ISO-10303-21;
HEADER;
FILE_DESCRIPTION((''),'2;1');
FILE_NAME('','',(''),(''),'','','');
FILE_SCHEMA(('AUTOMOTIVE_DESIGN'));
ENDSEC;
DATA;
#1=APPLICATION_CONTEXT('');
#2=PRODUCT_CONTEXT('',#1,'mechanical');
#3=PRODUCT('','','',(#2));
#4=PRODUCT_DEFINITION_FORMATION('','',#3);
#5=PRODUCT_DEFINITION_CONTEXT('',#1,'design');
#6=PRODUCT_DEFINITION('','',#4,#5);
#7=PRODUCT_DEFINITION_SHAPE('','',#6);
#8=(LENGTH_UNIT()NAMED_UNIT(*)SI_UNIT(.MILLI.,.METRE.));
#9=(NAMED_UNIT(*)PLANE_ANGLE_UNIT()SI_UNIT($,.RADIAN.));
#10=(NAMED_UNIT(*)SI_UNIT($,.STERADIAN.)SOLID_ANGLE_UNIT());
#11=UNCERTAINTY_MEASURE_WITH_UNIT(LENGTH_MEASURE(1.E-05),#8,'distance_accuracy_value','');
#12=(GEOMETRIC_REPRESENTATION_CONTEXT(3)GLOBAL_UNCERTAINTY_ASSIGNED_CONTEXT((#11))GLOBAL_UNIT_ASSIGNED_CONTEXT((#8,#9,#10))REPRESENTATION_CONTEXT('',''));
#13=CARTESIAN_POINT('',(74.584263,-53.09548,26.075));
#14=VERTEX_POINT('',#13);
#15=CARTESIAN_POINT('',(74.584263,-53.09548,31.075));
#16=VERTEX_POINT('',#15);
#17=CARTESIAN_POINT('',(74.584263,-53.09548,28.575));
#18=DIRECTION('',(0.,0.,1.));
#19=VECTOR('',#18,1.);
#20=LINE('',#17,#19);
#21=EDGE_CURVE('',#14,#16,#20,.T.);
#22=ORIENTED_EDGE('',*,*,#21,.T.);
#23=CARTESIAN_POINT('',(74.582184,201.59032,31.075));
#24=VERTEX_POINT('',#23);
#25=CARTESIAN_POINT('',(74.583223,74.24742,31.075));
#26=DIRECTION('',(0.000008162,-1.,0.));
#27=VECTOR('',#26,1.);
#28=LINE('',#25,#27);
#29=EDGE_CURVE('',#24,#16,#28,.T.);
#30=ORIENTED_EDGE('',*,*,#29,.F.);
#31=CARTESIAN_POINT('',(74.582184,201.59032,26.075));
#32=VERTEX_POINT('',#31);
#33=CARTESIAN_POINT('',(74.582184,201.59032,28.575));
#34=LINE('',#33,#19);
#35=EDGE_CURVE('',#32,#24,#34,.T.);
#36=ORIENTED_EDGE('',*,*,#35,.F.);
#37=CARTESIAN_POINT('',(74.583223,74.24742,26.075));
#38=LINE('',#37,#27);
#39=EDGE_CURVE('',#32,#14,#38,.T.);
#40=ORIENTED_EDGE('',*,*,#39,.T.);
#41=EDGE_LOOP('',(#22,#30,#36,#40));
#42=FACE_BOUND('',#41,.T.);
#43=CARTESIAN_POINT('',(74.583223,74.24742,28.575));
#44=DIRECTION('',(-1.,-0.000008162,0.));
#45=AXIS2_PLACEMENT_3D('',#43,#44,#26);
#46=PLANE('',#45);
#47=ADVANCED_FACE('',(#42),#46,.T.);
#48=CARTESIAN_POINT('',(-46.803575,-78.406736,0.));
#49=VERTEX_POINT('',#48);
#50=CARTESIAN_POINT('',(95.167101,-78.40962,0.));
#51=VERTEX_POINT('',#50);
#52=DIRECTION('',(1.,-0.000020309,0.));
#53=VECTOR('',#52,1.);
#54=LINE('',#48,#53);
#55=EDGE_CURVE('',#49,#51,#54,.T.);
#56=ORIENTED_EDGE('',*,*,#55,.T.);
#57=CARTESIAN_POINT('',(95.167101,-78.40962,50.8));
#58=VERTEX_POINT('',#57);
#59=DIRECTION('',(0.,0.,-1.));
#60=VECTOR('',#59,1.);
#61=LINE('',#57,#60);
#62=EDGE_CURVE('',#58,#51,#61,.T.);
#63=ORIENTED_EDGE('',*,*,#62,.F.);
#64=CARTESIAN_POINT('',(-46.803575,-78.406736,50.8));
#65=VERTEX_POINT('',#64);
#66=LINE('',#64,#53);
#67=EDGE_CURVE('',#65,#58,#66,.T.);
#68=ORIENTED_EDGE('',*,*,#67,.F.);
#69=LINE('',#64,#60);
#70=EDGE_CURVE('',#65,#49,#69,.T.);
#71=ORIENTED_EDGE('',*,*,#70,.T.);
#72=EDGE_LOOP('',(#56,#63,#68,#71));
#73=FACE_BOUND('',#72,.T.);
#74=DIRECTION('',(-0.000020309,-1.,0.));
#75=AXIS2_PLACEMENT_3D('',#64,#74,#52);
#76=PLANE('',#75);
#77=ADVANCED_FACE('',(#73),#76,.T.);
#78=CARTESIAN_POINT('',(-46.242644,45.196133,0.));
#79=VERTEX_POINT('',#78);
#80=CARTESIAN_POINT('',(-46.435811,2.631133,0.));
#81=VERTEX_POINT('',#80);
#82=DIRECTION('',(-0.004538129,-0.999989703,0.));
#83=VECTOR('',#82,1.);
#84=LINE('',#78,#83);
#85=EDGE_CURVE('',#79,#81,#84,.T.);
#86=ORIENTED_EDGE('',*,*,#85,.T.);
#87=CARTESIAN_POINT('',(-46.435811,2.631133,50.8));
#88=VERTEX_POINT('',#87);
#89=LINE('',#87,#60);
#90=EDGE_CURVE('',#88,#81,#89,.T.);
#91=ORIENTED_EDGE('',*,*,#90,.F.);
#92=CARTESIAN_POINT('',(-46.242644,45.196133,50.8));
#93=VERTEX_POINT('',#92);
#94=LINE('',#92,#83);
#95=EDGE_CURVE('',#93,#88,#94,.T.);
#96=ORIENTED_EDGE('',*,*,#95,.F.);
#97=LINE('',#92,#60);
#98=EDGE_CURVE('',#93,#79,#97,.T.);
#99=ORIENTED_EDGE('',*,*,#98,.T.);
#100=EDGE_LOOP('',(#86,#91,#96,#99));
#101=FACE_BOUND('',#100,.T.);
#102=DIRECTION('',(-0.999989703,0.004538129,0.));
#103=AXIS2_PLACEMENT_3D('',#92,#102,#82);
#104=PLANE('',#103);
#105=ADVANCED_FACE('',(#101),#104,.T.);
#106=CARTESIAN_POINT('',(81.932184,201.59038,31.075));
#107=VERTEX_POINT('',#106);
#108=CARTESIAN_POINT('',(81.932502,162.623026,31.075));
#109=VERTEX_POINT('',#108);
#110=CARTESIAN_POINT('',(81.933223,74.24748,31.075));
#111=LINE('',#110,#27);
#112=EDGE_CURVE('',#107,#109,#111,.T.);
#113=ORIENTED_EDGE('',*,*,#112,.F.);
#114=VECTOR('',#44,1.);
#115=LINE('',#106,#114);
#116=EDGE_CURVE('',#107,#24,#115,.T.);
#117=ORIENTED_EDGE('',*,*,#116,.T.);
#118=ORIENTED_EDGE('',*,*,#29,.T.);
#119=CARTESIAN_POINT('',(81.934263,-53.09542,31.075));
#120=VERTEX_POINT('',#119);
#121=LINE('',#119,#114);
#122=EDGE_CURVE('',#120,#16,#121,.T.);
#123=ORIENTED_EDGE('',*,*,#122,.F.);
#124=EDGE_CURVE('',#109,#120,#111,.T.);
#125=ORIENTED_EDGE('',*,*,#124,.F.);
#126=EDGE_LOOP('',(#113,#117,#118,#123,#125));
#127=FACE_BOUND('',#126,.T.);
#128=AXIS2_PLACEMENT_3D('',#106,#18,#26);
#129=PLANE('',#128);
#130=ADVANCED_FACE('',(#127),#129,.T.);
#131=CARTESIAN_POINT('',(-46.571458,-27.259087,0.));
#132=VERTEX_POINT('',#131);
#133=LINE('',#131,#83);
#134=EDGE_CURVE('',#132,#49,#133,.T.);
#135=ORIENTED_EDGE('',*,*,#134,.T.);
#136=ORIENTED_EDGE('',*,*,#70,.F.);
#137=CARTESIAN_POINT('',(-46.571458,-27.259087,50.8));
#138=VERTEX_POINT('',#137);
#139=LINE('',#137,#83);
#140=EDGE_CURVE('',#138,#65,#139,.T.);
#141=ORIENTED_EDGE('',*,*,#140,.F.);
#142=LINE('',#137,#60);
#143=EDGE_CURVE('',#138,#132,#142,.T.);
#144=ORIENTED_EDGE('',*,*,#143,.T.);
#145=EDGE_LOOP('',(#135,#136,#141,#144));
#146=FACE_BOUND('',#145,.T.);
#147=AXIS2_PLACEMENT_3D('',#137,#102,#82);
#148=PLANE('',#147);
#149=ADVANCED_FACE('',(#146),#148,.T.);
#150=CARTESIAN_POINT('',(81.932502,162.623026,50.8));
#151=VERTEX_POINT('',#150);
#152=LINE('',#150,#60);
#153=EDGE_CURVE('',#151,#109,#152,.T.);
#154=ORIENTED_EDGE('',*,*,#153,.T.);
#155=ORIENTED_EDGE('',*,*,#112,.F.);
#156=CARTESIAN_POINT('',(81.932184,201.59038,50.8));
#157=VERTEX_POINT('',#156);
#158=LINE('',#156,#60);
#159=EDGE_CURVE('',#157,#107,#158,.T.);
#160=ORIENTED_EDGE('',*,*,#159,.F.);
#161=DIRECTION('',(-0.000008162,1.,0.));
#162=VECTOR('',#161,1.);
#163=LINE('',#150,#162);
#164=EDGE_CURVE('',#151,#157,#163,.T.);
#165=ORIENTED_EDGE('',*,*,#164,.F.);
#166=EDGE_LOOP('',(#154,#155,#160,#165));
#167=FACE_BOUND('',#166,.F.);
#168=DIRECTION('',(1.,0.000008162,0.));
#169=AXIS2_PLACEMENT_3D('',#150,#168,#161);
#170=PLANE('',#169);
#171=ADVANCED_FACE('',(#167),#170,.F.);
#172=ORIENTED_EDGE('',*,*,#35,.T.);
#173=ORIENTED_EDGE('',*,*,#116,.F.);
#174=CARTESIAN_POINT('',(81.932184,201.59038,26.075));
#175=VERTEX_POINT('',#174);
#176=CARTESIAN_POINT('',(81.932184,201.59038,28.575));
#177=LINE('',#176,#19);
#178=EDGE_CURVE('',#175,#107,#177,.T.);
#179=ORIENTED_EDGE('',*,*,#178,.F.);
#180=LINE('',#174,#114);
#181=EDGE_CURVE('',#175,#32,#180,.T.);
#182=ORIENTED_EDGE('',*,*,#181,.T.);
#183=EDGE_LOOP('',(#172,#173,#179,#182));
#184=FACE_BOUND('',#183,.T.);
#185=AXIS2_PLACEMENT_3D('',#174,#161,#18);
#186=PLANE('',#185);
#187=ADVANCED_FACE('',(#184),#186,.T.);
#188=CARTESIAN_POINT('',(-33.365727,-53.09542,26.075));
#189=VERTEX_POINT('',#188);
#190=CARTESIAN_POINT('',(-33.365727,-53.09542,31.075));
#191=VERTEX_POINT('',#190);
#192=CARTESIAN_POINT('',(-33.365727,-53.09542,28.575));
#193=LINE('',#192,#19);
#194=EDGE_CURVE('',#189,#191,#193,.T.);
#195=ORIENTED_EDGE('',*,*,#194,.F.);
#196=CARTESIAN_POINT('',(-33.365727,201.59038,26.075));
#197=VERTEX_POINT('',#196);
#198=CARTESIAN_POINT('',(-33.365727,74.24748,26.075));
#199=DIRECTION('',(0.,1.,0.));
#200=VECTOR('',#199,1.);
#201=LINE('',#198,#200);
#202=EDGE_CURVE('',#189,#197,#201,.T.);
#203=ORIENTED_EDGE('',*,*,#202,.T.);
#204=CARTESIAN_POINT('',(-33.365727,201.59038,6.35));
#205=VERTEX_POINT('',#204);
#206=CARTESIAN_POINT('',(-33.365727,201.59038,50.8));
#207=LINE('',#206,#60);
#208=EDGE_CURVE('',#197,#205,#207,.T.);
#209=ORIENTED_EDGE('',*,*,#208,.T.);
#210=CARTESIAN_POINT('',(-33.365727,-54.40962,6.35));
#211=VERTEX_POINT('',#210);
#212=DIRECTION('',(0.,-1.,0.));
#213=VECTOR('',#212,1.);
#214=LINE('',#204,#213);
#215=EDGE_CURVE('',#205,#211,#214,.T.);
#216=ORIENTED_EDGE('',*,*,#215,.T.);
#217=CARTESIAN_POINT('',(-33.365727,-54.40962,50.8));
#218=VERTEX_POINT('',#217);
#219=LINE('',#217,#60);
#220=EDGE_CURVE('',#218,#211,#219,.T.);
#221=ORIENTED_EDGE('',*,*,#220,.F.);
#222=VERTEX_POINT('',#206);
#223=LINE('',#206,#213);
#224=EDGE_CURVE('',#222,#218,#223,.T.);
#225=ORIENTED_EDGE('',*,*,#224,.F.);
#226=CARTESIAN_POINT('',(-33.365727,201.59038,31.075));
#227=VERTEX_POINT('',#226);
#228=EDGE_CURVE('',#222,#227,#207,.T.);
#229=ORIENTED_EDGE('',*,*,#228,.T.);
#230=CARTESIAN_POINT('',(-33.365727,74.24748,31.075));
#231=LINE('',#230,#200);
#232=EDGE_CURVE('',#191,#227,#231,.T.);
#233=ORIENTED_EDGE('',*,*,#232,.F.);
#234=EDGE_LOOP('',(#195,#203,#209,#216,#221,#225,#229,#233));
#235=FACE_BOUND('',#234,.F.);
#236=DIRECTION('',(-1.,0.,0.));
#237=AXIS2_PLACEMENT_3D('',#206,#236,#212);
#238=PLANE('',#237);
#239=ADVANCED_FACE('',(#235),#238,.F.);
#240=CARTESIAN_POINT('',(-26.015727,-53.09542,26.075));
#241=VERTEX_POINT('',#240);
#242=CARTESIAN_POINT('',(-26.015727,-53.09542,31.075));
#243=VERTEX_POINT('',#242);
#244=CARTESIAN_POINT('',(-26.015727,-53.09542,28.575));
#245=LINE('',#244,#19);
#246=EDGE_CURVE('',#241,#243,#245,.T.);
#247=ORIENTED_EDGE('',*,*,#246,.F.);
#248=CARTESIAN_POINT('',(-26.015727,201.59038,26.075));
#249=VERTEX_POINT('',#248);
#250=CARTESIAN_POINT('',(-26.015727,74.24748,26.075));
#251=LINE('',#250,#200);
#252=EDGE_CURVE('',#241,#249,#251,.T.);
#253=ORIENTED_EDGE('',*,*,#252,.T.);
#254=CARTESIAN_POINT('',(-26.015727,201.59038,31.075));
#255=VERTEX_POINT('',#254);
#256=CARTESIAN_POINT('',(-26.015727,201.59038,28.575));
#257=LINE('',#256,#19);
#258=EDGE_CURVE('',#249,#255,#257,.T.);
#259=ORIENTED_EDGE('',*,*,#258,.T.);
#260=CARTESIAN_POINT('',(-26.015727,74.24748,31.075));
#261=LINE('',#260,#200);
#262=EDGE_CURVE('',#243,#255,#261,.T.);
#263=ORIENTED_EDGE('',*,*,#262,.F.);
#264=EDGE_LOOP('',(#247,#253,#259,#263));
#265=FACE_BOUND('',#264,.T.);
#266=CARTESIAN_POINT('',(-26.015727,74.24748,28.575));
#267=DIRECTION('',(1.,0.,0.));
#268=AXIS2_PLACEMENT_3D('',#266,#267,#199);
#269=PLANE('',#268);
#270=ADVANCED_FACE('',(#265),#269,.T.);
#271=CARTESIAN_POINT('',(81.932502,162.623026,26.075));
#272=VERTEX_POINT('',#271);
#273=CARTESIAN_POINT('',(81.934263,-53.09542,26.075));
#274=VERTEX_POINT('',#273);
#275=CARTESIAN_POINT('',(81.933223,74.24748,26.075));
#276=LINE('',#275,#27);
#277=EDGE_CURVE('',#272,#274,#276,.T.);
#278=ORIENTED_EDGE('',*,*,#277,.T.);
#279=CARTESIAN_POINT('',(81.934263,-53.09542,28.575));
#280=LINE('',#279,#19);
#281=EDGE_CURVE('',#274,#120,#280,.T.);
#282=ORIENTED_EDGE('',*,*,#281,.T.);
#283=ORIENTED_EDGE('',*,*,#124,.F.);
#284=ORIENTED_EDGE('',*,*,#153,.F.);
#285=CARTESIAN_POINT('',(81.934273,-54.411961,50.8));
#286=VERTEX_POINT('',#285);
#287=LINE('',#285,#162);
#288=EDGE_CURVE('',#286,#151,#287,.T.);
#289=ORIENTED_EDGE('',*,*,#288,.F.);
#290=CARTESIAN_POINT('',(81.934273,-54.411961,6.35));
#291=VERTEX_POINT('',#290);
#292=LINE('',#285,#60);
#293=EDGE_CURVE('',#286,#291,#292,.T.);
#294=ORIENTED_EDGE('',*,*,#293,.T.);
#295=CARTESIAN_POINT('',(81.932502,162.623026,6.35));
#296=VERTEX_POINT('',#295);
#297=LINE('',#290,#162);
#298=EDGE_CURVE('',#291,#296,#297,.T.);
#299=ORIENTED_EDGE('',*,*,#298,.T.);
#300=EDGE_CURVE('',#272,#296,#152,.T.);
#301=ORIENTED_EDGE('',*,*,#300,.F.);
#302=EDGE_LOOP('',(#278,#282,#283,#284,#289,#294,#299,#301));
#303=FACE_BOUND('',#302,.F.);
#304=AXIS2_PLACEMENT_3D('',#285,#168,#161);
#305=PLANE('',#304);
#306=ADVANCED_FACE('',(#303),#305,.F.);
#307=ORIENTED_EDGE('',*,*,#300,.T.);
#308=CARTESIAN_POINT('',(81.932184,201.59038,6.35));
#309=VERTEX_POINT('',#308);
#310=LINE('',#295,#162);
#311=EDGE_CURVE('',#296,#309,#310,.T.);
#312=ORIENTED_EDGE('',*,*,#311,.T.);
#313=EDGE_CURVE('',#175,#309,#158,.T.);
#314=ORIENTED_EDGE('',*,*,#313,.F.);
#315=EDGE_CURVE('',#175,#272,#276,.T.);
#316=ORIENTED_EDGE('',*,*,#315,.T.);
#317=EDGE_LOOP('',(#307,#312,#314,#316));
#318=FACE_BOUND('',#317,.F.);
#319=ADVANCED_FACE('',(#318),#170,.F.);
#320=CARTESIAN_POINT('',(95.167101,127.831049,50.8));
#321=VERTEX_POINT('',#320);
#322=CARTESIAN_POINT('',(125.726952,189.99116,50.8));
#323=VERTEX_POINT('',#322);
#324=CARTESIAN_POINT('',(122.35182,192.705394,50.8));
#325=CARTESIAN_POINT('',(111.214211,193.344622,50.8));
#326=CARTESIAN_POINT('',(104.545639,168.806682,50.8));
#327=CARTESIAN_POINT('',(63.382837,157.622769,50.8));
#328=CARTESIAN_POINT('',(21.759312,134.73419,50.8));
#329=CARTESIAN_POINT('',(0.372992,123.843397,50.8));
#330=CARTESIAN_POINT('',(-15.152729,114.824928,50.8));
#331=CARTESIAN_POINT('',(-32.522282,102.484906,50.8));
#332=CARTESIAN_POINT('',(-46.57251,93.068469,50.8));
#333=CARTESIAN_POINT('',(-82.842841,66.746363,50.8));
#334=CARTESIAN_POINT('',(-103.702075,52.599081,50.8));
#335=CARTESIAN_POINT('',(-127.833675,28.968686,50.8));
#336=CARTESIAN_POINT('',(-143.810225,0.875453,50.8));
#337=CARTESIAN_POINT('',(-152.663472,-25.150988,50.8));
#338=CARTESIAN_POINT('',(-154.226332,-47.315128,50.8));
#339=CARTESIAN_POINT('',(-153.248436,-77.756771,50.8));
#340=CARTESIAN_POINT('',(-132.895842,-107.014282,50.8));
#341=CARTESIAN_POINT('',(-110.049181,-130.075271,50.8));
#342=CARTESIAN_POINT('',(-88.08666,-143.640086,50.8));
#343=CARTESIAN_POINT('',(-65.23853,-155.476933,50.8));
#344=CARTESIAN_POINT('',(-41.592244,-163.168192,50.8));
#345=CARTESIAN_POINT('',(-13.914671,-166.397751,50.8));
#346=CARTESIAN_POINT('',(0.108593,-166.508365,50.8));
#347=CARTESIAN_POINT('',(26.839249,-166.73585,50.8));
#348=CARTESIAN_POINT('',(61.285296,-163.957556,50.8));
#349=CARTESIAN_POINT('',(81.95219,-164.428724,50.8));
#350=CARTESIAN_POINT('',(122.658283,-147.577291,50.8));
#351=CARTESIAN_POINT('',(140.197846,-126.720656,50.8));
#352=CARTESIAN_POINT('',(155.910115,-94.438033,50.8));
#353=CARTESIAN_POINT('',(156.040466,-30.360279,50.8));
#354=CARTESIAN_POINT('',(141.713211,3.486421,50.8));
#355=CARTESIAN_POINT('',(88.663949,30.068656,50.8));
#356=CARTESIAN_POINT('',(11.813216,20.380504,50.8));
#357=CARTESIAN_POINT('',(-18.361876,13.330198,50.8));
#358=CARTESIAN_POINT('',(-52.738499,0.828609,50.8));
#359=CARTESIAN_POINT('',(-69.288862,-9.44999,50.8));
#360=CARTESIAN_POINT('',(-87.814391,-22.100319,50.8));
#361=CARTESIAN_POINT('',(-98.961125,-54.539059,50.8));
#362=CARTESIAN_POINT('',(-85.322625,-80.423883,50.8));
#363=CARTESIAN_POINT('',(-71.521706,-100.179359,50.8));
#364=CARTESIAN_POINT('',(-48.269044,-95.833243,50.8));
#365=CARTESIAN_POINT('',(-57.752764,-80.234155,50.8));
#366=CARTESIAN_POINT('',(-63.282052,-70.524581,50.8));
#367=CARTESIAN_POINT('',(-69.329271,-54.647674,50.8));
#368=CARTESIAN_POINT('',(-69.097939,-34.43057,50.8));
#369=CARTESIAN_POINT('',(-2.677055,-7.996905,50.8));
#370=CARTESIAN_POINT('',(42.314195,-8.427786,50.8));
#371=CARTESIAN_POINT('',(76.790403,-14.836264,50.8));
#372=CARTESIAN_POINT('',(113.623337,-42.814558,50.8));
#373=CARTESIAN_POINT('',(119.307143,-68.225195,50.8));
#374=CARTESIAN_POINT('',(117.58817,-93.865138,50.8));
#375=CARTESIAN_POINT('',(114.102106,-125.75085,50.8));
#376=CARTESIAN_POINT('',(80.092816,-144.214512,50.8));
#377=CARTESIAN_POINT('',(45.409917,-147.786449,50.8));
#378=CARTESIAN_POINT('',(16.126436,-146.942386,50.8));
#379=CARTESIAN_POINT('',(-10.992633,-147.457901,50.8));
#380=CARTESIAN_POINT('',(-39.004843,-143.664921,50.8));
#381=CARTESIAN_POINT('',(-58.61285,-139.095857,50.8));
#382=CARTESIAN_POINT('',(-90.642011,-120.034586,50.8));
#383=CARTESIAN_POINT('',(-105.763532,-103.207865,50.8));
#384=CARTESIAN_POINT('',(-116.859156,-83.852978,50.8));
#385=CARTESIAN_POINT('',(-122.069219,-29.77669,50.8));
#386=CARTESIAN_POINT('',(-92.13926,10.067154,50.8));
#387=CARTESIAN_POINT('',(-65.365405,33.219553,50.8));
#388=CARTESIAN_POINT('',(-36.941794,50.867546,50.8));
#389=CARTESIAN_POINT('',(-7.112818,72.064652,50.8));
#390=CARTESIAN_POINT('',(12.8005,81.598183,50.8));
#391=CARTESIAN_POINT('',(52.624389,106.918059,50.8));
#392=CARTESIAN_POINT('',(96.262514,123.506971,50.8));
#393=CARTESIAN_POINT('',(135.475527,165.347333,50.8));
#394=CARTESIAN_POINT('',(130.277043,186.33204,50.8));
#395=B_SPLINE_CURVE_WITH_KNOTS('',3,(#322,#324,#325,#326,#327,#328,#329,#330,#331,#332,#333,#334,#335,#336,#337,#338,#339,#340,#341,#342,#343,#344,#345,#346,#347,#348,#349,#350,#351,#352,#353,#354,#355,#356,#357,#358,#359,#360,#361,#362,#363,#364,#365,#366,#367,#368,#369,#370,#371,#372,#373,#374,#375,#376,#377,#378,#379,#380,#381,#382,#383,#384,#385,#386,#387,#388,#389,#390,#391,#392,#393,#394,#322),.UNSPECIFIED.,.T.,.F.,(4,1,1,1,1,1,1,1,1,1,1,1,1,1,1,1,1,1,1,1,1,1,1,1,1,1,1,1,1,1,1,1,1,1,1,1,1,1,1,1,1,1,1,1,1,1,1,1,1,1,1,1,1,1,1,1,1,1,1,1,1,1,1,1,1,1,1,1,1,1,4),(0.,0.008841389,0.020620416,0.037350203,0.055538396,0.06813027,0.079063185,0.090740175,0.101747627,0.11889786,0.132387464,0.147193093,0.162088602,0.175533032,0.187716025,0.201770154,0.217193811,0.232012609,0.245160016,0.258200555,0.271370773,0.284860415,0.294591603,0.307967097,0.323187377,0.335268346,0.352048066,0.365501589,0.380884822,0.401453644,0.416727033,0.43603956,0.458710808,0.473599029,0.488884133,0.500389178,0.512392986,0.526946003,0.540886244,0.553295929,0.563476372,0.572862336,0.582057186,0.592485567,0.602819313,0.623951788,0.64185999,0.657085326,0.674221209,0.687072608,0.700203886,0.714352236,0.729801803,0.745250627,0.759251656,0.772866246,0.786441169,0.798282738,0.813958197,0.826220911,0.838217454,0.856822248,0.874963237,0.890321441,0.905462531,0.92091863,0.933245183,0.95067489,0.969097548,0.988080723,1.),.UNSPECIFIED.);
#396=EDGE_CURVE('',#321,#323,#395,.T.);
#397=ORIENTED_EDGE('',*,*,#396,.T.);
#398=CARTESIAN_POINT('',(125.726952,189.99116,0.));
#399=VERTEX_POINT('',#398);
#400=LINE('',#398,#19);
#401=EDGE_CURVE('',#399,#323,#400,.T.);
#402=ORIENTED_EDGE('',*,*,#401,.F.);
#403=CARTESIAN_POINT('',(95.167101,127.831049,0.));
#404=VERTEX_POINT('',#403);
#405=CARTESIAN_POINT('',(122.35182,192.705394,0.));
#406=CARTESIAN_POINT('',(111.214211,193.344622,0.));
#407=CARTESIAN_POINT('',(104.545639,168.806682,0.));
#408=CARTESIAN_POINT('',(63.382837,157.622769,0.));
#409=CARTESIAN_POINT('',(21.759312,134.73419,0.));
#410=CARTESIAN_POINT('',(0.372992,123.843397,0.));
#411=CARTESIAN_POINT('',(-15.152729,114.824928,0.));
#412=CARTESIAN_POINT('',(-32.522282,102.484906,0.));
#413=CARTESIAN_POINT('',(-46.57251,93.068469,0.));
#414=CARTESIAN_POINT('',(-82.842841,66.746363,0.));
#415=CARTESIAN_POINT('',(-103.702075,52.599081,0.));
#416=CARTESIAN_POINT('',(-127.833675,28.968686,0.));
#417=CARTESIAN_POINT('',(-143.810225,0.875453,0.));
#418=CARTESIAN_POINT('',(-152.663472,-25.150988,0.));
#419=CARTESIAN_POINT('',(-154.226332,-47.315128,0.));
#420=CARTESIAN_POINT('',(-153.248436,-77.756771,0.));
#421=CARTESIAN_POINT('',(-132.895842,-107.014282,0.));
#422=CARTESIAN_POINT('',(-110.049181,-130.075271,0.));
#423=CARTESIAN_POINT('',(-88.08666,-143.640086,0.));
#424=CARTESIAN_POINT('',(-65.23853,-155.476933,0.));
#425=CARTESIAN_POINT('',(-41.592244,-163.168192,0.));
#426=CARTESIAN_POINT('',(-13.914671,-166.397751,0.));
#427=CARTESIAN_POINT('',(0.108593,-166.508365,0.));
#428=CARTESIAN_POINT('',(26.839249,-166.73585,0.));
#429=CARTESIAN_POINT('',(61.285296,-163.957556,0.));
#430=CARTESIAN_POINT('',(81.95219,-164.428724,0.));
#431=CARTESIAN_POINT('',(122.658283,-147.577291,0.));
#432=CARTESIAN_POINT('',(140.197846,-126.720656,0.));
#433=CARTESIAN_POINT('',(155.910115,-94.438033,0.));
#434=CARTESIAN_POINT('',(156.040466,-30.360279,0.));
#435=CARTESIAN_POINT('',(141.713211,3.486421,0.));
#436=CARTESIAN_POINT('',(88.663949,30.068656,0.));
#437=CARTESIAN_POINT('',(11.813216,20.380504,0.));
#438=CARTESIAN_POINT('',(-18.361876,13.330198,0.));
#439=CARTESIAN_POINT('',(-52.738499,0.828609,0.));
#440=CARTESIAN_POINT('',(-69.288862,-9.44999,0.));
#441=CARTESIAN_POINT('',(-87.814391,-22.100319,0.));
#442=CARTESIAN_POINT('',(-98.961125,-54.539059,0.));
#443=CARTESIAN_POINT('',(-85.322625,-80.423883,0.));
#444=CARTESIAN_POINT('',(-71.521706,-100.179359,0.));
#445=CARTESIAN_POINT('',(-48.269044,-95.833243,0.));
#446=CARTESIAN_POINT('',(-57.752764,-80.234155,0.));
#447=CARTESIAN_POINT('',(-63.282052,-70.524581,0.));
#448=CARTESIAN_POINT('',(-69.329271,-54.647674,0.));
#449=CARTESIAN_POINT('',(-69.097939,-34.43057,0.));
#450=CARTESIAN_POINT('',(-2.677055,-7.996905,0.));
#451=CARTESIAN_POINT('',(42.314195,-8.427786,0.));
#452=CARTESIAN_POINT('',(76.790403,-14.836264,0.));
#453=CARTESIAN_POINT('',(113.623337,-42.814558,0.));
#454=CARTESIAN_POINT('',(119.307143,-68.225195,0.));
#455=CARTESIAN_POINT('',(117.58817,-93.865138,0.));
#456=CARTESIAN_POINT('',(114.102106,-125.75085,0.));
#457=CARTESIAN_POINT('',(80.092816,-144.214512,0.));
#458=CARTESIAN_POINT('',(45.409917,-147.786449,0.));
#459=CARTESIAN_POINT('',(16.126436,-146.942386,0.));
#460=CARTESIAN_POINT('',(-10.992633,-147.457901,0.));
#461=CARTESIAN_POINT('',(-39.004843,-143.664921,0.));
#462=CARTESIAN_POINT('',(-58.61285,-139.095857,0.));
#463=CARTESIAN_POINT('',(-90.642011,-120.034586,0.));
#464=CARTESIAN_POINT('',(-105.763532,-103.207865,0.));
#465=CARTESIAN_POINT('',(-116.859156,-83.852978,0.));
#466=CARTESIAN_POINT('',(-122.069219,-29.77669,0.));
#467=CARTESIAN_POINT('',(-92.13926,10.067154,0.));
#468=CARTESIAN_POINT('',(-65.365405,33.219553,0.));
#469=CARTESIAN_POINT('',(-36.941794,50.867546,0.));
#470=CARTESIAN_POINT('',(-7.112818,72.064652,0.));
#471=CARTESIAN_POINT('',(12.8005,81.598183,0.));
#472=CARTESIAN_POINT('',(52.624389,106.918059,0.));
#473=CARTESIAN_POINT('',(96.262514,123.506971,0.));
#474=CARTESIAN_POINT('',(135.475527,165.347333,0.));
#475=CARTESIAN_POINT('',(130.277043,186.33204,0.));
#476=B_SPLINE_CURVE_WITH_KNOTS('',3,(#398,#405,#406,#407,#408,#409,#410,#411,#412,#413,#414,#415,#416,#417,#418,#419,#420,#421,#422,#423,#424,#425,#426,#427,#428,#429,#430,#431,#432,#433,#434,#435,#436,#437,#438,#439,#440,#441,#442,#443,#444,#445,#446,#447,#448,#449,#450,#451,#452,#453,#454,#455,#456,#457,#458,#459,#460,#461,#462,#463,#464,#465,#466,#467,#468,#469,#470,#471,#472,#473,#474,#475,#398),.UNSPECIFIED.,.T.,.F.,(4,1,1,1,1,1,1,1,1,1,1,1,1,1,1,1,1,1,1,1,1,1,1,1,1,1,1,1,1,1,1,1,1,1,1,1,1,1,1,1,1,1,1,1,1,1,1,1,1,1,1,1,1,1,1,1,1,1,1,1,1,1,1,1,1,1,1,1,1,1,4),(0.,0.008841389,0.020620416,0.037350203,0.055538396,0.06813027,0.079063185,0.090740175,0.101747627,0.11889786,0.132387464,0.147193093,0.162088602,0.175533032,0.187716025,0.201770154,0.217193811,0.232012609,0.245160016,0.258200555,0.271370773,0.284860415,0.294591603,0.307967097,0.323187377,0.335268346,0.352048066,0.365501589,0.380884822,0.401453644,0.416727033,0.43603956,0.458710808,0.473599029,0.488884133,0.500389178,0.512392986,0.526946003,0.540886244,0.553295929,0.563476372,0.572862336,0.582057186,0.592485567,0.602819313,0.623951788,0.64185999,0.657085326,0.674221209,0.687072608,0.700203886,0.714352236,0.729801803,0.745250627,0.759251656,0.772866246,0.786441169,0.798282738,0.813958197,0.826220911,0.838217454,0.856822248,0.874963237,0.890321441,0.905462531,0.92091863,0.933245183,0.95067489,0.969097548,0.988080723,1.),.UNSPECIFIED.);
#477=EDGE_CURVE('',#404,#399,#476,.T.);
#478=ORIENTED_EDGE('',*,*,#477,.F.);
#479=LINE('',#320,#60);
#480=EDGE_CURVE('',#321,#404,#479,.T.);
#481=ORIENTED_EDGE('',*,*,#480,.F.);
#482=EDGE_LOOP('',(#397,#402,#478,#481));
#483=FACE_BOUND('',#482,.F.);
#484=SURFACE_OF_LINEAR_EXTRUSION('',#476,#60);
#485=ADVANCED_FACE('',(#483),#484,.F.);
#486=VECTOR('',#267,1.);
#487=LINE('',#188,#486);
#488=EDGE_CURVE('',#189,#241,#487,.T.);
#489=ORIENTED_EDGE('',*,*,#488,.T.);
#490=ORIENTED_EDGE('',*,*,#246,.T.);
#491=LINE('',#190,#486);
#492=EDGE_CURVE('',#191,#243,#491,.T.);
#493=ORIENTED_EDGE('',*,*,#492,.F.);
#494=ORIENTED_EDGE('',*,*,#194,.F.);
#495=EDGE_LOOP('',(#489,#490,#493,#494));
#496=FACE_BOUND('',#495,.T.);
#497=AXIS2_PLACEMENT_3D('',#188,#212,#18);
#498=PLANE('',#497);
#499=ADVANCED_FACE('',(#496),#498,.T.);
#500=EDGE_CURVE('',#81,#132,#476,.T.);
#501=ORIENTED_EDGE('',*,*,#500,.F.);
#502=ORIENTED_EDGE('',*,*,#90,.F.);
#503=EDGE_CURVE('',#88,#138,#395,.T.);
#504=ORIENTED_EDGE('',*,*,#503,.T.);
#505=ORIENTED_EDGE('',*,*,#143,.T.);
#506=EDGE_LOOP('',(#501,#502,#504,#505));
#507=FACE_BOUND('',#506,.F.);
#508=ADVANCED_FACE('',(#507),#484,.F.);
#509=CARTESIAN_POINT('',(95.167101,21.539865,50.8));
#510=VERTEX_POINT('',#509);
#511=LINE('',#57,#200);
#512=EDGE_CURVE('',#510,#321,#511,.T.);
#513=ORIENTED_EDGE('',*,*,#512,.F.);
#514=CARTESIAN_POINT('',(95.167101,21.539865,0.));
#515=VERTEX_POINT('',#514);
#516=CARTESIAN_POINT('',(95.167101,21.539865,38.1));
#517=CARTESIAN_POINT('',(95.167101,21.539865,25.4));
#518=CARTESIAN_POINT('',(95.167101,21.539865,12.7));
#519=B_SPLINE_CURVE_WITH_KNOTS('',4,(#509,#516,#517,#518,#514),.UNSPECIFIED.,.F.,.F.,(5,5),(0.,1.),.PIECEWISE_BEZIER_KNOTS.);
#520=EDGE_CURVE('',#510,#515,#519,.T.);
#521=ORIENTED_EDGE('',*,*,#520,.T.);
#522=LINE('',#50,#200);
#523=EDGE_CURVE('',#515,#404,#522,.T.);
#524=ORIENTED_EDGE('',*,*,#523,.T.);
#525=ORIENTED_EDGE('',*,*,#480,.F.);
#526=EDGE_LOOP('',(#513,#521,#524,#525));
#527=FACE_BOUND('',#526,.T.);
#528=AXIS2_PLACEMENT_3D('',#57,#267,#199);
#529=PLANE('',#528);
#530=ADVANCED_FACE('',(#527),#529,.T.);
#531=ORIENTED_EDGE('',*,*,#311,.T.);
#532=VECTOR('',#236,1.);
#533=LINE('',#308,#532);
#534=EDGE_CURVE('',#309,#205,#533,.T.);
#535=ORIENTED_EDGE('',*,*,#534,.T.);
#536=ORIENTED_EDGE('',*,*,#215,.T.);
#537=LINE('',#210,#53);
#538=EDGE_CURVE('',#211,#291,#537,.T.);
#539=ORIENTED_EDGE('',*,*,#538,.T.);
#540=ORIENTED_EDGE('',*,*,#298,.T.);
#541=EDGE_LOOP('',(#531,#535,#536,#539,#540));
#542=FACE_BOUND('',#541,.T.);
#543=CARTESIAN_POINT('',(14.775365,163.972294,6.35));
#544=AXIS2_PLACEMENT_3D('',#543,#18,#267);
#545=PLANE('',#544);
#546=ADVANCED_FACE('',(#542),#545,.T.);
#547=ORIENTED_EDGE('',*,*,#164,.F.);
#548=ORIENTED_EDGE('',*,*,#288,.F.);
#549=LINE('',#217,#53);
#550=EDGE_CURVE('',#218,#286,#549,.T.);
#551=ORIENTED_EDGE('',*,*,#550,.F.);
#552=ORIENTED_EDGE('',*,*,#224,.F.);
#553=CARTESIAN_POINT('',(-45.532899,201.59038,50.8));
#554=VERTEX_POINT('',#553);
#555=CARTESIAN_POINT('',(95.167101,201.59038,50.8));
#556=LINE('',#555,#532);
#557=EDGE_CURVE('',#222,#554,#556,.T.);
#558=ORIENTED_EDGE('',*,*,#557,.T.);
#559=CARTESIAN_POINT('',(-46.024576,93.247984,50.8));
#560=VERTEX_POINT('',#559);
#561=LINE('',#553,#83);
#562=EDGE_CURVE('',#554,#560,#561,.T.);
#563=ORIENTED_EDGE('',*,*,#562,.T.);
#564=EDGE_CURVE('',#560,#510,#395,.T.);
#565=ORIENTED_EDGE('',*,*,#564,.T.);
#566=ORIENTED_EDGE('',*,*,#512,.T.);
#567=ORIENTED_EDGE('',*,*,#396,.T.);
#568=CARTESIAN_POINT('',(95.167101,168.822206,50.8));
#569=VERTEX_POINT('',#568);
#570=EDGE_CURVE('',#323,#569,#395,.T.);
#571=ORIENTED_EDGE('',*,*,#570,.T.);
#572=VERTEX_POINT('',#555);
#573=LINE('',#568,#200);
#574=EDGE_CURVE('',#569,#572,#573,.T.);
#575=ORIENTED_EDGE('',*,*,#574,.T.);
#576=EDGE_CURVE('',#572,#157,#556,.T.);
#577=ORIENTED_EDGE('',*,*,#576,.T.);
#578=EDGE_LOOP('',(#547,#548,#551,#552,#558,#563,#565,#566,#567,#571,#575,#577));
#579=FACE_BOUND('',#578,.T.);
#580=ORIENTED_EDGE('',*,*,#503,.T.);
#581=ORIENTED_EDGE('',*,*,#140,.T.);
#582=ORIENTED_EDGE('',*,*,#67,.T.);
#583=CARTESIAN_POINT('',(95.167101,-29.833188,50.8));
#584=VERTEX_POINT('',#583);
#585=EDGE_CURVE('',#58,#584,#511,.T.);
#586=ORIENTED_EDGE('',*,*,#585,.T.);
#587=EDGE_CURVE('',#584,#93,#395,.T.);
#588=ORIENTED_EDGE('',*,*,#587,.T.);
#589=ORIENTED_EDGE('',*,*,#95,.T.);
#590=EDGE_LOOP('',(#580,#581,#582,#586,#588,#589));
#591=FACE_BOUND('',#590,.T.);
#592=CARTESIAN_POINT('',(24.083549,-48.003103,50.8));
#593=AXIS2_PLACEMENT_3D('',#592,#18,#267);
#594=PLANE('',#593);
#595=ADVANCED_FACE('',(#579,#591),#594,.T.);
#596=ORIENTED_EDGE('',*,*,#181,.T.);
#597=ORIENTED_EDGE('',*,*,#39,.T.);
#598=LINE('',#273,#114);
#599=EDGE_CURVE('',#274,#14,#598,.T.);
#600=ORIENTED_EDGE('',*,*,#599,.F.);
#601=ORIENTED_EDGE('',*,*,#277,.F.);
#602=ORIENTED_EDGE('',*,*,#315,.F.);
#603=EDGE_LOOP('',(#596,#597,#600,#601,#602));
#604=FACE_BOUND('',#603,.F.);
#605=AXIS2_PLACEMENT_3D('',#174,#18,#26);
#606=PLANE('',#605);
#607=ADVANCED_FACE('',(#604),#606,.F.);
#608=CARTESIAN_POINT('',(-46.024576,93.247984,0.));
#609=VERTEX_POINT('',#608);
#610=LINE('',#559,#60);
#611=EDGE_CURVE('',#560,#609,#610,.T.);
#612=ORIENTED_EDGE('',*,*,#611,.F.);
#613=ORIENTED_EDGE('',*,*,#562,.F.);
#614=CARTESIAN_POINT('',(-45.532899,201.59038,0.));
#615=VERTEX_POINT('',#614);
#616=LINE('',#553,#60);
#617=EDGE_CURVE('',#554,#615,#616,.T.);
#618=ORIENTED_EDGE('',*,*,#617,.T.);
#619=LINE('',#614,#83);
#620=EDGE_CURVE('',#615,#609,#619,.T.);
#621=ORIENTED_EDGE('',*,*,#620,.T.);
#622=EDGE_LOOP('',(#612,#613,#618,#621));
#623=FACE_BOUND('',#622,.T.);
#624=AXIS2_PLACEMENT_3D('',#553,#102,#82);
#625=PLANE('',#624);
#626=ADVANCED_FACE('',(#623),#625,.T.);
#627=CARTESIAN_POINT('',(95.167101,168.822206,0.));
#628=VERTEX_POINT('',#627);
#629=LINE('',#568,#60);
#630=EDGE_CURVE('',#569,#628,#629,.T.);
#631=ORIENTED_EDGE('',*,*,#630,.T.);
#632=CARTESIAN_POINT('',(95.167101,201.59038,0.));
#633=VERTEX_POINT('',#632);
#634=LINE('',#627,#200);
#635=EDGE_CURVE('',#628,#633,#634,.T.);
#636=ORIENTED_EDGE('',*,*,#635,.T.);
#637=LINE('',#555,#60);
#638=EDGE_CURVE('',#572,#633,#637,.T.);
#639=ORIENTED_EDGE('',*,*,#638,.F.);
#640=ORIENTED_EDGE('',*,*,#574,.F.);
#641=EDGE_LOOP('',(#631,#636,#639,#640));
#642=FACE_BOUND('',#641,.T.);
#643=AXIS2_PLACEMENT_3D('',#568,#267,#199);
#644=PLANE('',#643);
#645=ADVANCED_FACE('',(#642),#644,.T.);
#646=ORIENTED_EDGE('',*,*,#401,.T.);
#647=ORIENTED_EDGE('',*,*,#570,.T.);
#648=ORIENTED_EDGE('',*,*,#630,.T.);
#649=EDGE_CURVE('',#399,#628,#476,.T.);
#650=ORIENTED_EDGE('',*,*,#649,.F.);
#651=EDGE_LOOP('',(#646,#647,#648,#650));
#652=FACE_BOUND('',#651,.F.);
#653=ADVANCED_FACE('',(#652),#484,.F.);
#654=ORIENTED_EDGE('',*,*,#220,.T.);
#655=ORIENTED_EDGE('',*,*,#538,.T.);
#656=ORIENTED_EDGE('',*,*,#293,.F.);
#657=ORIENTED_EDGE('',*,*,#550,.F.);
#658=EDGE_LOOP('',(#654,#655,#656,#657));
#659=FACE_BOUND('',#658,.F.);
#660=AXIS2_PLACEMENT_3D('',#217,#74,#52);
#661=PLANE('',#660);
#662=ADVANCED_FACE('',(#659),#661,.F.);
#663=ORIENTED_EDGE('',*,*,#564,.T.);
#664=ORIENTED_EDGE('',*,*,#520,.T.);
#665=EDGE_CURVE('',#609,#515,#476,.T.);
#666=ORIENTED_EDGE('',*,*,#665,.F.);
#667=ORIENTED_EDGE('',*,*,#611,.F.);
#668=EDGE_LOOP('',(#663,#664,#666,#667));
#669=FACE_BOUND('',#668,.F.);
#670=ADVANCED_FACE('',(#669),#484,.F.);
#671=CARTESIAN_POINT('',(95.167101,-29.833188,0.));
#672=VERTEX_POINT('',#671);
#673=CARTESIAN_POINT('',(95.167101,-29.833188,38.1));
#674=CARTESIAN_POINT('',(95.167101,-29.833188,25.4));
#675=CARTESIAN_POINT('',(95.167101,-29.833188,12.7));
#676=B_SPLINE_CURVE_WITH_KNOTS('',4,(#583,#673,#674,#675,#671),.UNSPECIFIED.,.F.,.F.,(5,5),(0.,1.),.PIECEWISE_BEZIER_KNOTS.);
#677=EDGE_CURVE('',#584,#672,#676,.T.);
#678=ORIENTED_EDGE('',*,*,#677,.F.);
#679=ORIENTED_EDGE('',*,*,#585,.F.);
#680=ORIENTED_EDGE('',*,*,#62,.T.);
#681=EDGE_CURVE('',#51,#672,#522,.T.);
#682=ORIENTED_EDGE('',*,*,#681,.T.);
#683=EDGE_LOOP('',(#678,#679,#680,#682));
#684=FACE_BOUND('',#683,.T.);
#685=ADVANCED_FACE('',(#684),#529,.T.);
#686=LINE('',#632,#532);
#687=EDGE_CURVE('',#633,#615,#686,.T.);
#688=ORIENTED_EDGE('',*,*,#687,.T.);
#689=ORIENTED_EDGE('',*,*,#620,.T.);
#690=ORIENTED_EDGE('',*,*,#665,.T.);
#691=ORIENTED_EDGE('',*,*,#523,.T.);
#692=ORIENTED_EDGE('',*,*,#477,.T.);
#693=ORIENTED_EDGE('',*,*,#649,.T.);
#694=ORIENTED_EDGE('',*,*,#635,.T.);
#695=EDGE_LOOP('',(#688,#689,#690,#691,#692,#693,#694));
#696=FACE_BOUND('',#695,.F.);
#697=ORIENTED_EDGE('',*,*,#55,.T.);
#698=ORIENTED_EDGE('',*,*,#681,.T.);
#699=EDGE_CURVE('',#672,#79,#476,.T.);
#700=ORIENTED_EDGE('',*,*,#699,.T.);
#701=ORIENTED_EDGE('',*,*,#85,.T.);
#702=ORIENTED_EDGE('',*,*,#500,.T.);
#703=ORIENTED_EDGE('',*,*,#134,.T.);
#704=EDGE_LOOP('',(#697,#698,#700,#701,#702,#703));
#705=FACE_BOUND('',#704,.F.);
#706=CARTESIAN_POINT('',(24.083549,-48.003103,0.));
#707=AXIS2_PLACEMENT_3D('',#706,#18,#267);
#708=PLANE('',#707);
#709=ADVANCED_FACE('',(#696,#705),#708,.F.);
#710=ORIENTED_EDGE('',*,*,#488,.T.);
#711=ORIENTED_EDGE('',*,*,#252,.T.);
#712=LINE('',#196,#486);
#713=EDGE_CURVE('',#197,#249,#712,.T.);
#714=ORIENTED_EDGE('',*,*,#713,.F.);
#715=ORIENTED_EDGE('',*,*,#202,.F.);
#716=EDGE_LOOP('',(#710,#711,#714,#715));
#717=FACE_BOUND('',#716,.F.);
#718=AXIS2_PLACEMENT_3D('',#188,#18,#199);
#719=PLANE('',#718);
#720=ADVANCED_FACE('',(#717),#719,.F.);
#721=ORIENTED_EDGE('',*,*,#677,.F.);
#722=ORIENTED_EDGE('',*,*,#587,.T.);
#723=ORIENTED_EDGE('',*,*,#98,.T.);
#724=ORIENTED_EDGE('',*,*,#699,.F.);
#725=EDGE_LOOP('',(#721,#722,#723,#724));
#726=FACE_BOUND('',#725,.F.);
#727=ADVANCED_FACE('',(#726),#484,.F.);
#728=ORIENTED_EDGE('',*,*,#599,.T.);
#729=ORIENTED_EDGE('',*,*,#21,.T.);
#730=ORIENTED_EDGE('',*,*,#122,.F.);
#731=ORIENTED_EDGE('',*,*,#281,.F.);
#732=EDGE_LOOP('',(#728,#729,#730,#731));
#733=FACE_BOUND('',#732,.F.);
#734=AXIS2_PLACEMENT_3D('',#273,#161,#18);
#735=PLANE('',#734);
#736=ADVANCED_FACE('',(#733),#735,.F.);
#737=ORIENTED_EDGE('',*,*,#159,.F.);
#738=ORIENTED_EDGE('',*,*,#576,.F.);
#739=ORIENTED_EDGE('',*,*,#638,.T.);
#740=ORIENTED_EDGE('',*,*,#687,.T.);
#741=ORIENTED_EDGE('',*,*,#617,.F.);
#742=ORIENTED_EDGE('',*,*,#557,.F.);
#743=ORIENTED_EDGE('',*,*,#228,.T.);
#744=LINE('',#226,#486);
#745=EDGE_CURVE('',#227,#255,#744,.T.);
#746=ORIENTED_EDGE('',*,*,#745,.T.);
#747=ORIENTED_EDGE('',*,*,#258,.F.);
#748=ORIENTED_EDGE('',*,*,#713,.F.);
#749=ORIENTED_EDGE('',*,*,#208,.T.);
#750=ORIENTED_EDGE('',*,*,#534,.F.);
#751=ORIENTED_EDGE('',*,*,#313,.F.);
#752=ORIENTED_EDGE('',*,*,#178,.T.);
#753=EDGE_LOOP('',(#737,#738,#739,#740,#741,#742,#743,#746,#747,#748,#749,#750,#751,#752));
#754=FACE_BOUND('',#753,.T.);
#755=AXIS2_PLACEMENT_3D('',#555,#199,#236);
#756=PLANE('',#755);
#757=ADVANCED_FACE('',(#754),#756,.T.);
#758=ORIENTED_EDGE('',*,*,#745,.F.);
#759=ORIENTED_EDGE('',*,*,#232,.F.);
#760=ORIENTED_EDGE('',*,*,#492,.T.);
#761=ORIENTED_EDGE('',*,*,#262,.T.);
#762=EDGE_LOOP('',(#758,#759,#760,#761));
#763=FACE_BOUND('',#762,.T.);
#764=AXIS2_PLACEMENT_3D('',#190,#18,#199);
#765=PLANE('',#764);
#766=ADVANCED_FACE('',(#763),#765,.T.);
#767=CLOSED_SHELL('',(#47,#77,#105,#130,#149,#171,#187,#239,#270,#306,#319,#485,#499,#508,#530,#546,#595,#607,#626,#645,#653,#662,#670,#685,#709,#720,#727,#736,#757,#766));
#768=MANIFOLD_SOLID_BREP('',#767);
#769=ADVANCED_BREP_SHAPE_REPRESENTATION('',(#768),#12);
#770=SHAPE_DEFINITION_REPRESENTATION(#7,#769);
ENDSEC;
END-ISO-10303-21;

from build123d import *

# Parameters (mm, degrees)
F1_DEPTH = 50.8
F3_DEPTH = 50.8
F5_DEPTH = 44.45
F6_W     = 254.6858
F6_H     = 5
F8_DEPTH = 7.35
F7_W     = 254.6858
F7_H     = 5
F9_DEPTH = 7.35


# Not quite as in the source:
# - a feature names something its author has since deleted; it is built from what else it names


with BuildPart() as f1:
    # F0 (on Top) → F1 (new body)
    with BuildSketch(Plane.XY):
        with BuildLine():
            add(Edge.make_bspline(
                [(125.7269519745, 189.991159727), (122.3518203117, 192.7053935071), (111.2142106452, 193.3446218107), (104.5456392327, 168.8066823722), (63.3828372069, 157.6227686534), (21.7593119292, 134.7341899142), (0.3729918982, 123.8433966761), (-15.1527288368, 114.8249276639), (-32.5222819083, 102.4849064348), (-46.5725102285, 93.0684693464), (-82.8428413228, 66.746362756), (-103.7020746054, 52.59908065), (-127.8336751098, 28.9686859932), (-143.8102254505, 0.8754533738), (-152.6634719103, -25.1509877278), (-154.2263316972, -47.3151282142), (-153.2484361466, -77.7567714177), (-132.8958418183, -107.014281773), (-110.0491810359, -130.0752708141), (-88.0866600926, -143.6400857549), (-65.2385297743, -155.4769333183), (-41.5922440709, -163.1681919134), (-13.914670611, -166.3977513748), (0.1085926371, -166.5083652123), (26.8392485047, -166.7358495621), (61.2852961489, -163.9575559504), (81.9521897052, -164.4287242821), (122.6582829084, -147.5772914557), (140.1978462225, -126.7206556597), (155.9101153518, -94.4380334629), (156.0404662598, -30.3602794916), (141.7132105707, 3.4864205982), (88.6639491361, 30.0686559843), (11.8132162579, 20.380503993), (-18.3618763566, 13.3301979311), (-52.7384990739, 0.8286088804), (-69.2888621609, -9.4499896277), (-87.814391491, -22.1003193455), (-98.9611253924, -54.5390594087), (-85.3226254433, -80.4238827983), (-71.52170574, -100.1793594961), (-48.2690443764, -95.8332432139), (-57.7527638639, -80.2341547689), (-63.2820519632, -70.5245811939), (-69.3292706473, -54.6476744178), (-69.0979393699, -34.4305695104), (-2.6770546021, -7.9969048242), (42.314195006, -8.4277855233), (76.7904027335, -14.8362639415), (113.623336984, -42.8145575479), (119.3071426582, -68.2251948608), (117.588169986, -93.865138267), (114.1021059505, -125.7508497194), (80.0928160091, -144.2145120801), (45.4099166878, -147.7864485576), (16.1264360325, -146.9423859654), (-10.9926329062, -147.4579010438), (-39.004843071, -143.6649208598), (-58.6128504466, -139.0958568827), (-90.6420113734, -120.0345858112), (-105.7635321902, -103.2078654179), (-116.8591559372, -83.8529779262), (-122.0692191616, -29.7766902474), (-92.1392604492, 10.0671541536), (-65.3654050247, 33.2195527597), (-36.9417942364, 50.8675460638), (-7.1128182808, 72.0646516488), (12.800500031, 81.5981832557), (52.6243890024, 106.9180592515), (96.2625139742, 123.5069711027), (135.4755268537, 165.3473328003), (130.2770433606, 186.3320397352), (125.7269519745, 189.991159727)],
                knots=[0, 0, 0, 0, 0.0088413891, 0.0206204161, 0.0373502029, 0.0555383956, 0.0681302702, 0.0790631849, 0.090740175, 0.1017476271, 0.1188978604, 0.1323874644, 0.1471930925, 0.1620886022, 0.1755330322, 0.1877160253, 0.2017701538, 0.2171938111, 0.2320126089, 0.2451600157, 0.2582005547, 0.2713707729, 0.2848604147, 0.2945916029, 0.3079670972, 0.3231873767, 0.3352683463, 0.3520480663, 0.3655015892, 0.3808848218, 0.4014536445, 0.4167270326, 0.4360395597, 0.4587108082, 0.4735990292, 0.4888841325, 0.5003891776, 0.5123929862, 0.5269460027, 0.5408862436, 0.5532959287, 0.5634763718, 0.5728623362, 0.582057186, 0.5924855666, 0.602819313, 0.6239517883, 0.64185999, 0.6570853261, 0.6742212093, 0.687072608, 0.7002038863, 0.7143522364, 0.7298018025, 0.7452506268, 0.7592516558, 0.7728662456, 0.7864411689, 0.7982827376, 0.8139581969, 0.8262209109, 0.8382174545, 0.856822248, 0.8749632367, 0.8903214408, 0.905462531, 0.92091863, 0.9332451828, 0.9506748902, 0.969097548, 0.9880807232, 1, 1, 1, 1], degree=3))
        make_face()
    extrude(amount=F1_DEPTH)

    # F2 (on face) → F3 (join)
    with BuildSketch(Plane.XY.offset(50.8)):
        with BuildLine():
            Line((-46.8035750091, -78.4067362547), (95.1671009767, -78.409619515))
            Line((95.1671009767, -78.409619515), (95.1671009767, -29.8331879583))
            add(Edge.make_bspline(
                [(-46.5714580109, -27.2590865102), (-34.0682119102, -21.0690998309), (4.106437127, -8.0618702494), (42.314195006, -8.4277855233), (70.8109309149, -13.7247926218), (89.251013393, -25.2255814829), (95.1671009768, -29.8331879583)],
                knots=[0.611001194, 0.611001194, 0.611001194, 0.611001194, 0.6239517883, 0.64185999, 0.6570853261, 0.6655026, 0.6655026, 0.6655026, 0.6655026], degree=3))
            Line((-46.5714580109, -27.2590865102), (-46.8035750091, -78.4067362547))
        make_face()
        with BuildLine():
            add(Edge.make_bspline(
                [(-46.5714580109, -27.2590865102), (-34.0682119102, -21.0690998309), (4.106437127, -8.0618702494), (42.314195006, -8.4277855233), (70.8109309149, -13.7247926218), (89.251013393, -25.2255814829), (95.1671009768, -29.8331879583)],
                knots=[0.611001194, 0.611001194, 0.611001194, 0.611001194, 0.6239517883, 0.64185999, 0.6570853261, 0.6655026, 0.6655026, 0.6655026, 0.6655026], degree=3))
            Line((95.1671009767, -29.8331879583), (95.1671009767, 21.5398646158))
            add(Edge.make_bspline(
                [(95.1671009768, 21.5398646158), (92.8297962423, 22.0513191), (65.5031803874, 27.1489044156), (11.8132162579, 20.380503993), (-16.5897713992, 13.7442441276), (-38.2106089018, 6.0882020874), (-46.4358109558, 2.6311331304)],
                knots=[0.4338667412, 0.4338667412, 0.4338667412, 0.4338667412, 0.4360395597, 0.4587108082, 0.4735990292, 0.4857807077, 0.4857807077, 0.4857807077, 0.4857807077], degree=3))
            Line((-46.4358109558, 2.6311331304), (-46.5714580109, -27.2590865102))
        make_face()
        with BuildLine():
            add(Edge.make_bspline(
                [(95.1671009768, 21.5398646158), (92.8297962423, 22.0513191), (65.5031803874, 27.1489044156), (11.8132162579, 20.380503993), (-16.5897713992, 13.7442441276), (-38.2106089018, 6.0882020874), (-46.4358109558, 2.6311331304)],
                knots=[0.4338667412, 0.4338667412, 0.4338667412, 0.4338667412, 0.4360395597, 0.4587108082, 0.4735990292, 0.4857807077, 0.4857807077, 0.4857807077, 0.4857807077], degree=3))
            Line((95.1671009767, 21.5398646158), (95.1671009767, 127.8310488696))
            add(Edge.make_bspline(
                [(-46.2426435255, 45.1961333015), (-43.0776503309, 47.2670156911), (-29.9013887118, 55.8706081698), (-7.1128182808, 72.0646516488), (12.800500031, 81.5981832557), (52.4019975541, 106.7766636209), (80.7274218698, 117.6009223881), (95.1671009766, 127.8310488696)],
                knots=[0.9004525479, 0.9004525479, 0.9004525479, 0.9004525479, 0.905462531, 0.92091863, 0.9332451828, 0.9506748902, 0.968828499, 0.968828499, 0.968828499, 0.968828499], degree=3))
            Line((-46.2426435254, 45.1961333015), (-46.4358109558, 2.6311331304))
        make_face()
        with BuildLine():
            Line((-45.5328990233, 201.590380485), (-46.0245758076, 93.2479835951))
            add(Edge.make_bspline(
                [(95.1671009766, 168.8222056765), (86.9990973718, 163.9239706682), (59.8217062278, 155.6645196519), (21.7593119292, 134.7341899142), (0.3729918982, 123.8433966761), (-15.1527288368, 114.8249276639), (-32.3304338629, 102.6212029153), (-40.2604651432, 97.2989166807), (-46.0245758077, 93.2479835951)],
                knots=[0.0246851562, 0.0246851562, 0.0246851562, 0.0246851562, 0.0373502029, 0.0555383956, 0.0681302702, 0.0790631849, 0.090740175, 0.1013763208, 0.1013763208, 0.1013763208, 0.1013763208], degree=3))
            Line((95.1671009767, 168.8222056765), (95.1671009767, 201.590380485))
            Line((95.1671009767, 201.590380485), (-45.5328990233, 201.590380485))
        make_face()
    extrude(amount=-F3_DEPTH)

    # F4 (on face) → F5 (cut)
    with BuildSketch(Plane.XY.offset(50.8)):
        with BuildLine():
            Line((81.9325018531, 162.6230259561), (81.9321837852, 201.590380485))
            Line((81.9321837852, 201.590380485), (-33.3657265927, 201.590380485))
            Line((-33.3657265927, 201.590380485), (-33.3657265927, 101.998818935))
            add(Edge.make_bspline(
                [(81.9325018532, 162.6230259561), (76.4815710378, 160.4783865935), (54.5886080956, 152.7868638586), (21.7593119292, 134.7341899142), (0.3729918982, 123.8433966761), (-15.1527288368, 114.8249276639), (-27.4360360639, 106.098377745), (-32.8786985755, 102.3348578929), (-33.3657265927, 101.998818935)],
                knots=[0.0306583102, 0.0306583102, 0.0306583102, 0.0306583102, 0.0373502029, 0.0555383956, 0.0681302702, 0.0790631849, 0.090740175, 0.091903612, 0.091903612, 0.091903612, 0.091903612], degree=3))
        make_face()
        with BuildLine():
            Line((81.9328531355, 119.5864658858), (81.9325018531, 162.6230259561))
            add(Edge.make_bspline(
                [(81.9325018532, 162.6230259561), (76.4815710378, 160.4783865935), (54.5886080956, 152.7868638586), (21.7593119292, 134.7341899142), (0.3729918982, 123.8433966761), (-15.1527288368, 114.8249276639), (-27.4360360639, 106.098377745), (-32.8786985755, 102.3348578929), (-33.3657265927, 101.998818935)],
                knots=[0.0306583102, 0.0306583102, 0.0306583102, 0.0306583102, 0.0373502029, 0.0555383956, 0.0681302702, 0.0790631849, 0.090740175, 0.091903612, 0.091903612, 0.091903612, 0.091903612], degree=3))
            Line((-33.3657265927, 101.998818935), (-33.3657265927, 53.7188803265))
            add(Edge.make_bspline(
                [(-33.3657265927, 53.7188803265), (-24.1976873803, 59.9141802901), (-6.4010596607, 72.405407177), (12.800500031, 81.5981832557), (47.8214872557, 103.8643927265), (71.8786453995, 114.0385140692), (81.9328531356, 119.5864658858)],
                knots=[0.9070785493, 0.9070785493, 0.9070785493, 0.9070785493, 0.92091863, 0.9332451828, 0.9506748902, 0.9632870003, 0.9632870003, 0.9632870003, 0.9632870003], degree=3))
        make_face()
        with BuildLine():
            Line((81.9336362003, 23.6510812759), (81.9328531355, 119.5864658858))
            add(Edge.make_bspline(
                [(-33.3657265927, 53.7188803265), (-24.1976873803, 59.9141802901), (-6.4010596607, 72.405407177), (12.800500031, 81.5981832557), (47.8214872557, 103.8643927265), (71.8786453995, 114.0385140692), (81.9328531356, 119.5864658858)],
                knots=[0.9070785493, 0.9070785493, 0.9070785493, 0.9070785493, 0.92091863, 0.9332451828, 0.9506748902, 0.9632870003, 0.9632870003, 0.9632870003, 0.9632870003], degree=3))
            Line((-33.3657265927, 53.7188803265), (-33.3657265927, 7.6883592702))
            add(Edge.make_bspline(
                [(81.9336362003, 23.6510812759), (57.830614396, 26.1765022465), (10.7986173979, 20.1434464772), (-13.125120387, 14.5537478579), (-28.8279560716, 9.3170993456), (-33.3657265927, 7.6883592702)],
                knots=[0.4378163908, 0.4378163908, 0.4378163908, 0.4378163908, 0.4587108082, 0.4735990292, 0.4797131869, 0.4797131869, 0.4797131869, 0.4797131869], degree=3))
        make_face()
        with BuildLine():
            Line((81.9340007063, -21.0055399792), (81.9336362003, 23.6510812759))
            add(Edge.make_bspline(
                [(81.9336362003, 23.6510812759), (57.830614396, 26.1765022465), (10.7986173979, 20.1434464772), (-13.125120387, 14.5537478579), (-28.8279560716, 9.3170993456), (-33.3657265927, 7.6883592702)],
                knots=[0.4378163908, 0.4378163908, 0.4378163908, 0.4378163908, 0.4587108082, 0.4735990292, 0.4797131869, 0.4797131869, 0.4797131869, 0.4797131869], degree=3))
            Line((-33.3657265927, 7.6883592702), (-33.3657265927, -21.4725641799))
            add(Edge.make_bspline(
                [(-33.3657265928, -21.4725641798), (-23.8189305052, -17.7459515172), (7.6205617994, -8.0955249824), (42.314195006, -8.4277855233), (66.7171883615, -12.9638428964), (80.0817272052, -19.9593320041), (81.9340007063, -21.0055399792)],
                knots=[0.6152397413, 0.6152397413, 0.6152397413, 0.6152397413, 0.6239517883, 0.64185999, 0.6570853261, 0.6595335541, 0.6595335541, 0.6595335541, 0.6595335541], degree=3))
        make_face()
        with BuildLine():
            Line((81.9342733835, -54.4119611247), (81.9340007063, -21.0055399792))
            add(Edge.make_bspline(
                [(-33.3657265928, -21.4725641798), (-23.8189305052, -17.7459515172), (7.6205617994, -8.0955249824), (42.314195006, -8.4277855233), (66.7171883615, -12.9638428964), (80.0817272052, -19.9593320041), (81.9340007063, -21.0055399792)],
                knots=[0.6152397413, 0.6152397413, 0.6152397413, 0.6152397413, 0.6239517883, 0.64185999, 0.6570853261, 0.6595335541, 0.6595335541, 0.6595335541, 0.6595335541], degree=3))
            Line((-33.3657265927, -21.4725641799), (-33.3657265927, -54.409619515))
            Line((-33.3657265927, -54.409619515), (81.9342733835, -54.4119611247))
        make_face()
    extrude(amount=-F5_DEPTH, mode=Mode.SUBTRACT)

    # F6 (on face) → F8 (join)
    with BuildSketch(Plane.YZ.offset(-33.3657265927)):
        with Locations((74.247480485, 28.575)):
            Rectangle(F6_W, F6_H)
    extrude(amount=F8_DEPTH)

    # F7 (on face) → F9 (join)
    with BuildSketch(Plane(origin=(81.9338292449, 0.0006687782, 0), x_dir=(8.1624e-06, -1, 0), z_dir=(-1, -8.1624e-06, 0))):
        with Locations((-74.2468117135, 28.575)):
            Rectangle(F7_W, F7_H)
    extrude(amount=F9_DEPTH)


solid = f1.part
